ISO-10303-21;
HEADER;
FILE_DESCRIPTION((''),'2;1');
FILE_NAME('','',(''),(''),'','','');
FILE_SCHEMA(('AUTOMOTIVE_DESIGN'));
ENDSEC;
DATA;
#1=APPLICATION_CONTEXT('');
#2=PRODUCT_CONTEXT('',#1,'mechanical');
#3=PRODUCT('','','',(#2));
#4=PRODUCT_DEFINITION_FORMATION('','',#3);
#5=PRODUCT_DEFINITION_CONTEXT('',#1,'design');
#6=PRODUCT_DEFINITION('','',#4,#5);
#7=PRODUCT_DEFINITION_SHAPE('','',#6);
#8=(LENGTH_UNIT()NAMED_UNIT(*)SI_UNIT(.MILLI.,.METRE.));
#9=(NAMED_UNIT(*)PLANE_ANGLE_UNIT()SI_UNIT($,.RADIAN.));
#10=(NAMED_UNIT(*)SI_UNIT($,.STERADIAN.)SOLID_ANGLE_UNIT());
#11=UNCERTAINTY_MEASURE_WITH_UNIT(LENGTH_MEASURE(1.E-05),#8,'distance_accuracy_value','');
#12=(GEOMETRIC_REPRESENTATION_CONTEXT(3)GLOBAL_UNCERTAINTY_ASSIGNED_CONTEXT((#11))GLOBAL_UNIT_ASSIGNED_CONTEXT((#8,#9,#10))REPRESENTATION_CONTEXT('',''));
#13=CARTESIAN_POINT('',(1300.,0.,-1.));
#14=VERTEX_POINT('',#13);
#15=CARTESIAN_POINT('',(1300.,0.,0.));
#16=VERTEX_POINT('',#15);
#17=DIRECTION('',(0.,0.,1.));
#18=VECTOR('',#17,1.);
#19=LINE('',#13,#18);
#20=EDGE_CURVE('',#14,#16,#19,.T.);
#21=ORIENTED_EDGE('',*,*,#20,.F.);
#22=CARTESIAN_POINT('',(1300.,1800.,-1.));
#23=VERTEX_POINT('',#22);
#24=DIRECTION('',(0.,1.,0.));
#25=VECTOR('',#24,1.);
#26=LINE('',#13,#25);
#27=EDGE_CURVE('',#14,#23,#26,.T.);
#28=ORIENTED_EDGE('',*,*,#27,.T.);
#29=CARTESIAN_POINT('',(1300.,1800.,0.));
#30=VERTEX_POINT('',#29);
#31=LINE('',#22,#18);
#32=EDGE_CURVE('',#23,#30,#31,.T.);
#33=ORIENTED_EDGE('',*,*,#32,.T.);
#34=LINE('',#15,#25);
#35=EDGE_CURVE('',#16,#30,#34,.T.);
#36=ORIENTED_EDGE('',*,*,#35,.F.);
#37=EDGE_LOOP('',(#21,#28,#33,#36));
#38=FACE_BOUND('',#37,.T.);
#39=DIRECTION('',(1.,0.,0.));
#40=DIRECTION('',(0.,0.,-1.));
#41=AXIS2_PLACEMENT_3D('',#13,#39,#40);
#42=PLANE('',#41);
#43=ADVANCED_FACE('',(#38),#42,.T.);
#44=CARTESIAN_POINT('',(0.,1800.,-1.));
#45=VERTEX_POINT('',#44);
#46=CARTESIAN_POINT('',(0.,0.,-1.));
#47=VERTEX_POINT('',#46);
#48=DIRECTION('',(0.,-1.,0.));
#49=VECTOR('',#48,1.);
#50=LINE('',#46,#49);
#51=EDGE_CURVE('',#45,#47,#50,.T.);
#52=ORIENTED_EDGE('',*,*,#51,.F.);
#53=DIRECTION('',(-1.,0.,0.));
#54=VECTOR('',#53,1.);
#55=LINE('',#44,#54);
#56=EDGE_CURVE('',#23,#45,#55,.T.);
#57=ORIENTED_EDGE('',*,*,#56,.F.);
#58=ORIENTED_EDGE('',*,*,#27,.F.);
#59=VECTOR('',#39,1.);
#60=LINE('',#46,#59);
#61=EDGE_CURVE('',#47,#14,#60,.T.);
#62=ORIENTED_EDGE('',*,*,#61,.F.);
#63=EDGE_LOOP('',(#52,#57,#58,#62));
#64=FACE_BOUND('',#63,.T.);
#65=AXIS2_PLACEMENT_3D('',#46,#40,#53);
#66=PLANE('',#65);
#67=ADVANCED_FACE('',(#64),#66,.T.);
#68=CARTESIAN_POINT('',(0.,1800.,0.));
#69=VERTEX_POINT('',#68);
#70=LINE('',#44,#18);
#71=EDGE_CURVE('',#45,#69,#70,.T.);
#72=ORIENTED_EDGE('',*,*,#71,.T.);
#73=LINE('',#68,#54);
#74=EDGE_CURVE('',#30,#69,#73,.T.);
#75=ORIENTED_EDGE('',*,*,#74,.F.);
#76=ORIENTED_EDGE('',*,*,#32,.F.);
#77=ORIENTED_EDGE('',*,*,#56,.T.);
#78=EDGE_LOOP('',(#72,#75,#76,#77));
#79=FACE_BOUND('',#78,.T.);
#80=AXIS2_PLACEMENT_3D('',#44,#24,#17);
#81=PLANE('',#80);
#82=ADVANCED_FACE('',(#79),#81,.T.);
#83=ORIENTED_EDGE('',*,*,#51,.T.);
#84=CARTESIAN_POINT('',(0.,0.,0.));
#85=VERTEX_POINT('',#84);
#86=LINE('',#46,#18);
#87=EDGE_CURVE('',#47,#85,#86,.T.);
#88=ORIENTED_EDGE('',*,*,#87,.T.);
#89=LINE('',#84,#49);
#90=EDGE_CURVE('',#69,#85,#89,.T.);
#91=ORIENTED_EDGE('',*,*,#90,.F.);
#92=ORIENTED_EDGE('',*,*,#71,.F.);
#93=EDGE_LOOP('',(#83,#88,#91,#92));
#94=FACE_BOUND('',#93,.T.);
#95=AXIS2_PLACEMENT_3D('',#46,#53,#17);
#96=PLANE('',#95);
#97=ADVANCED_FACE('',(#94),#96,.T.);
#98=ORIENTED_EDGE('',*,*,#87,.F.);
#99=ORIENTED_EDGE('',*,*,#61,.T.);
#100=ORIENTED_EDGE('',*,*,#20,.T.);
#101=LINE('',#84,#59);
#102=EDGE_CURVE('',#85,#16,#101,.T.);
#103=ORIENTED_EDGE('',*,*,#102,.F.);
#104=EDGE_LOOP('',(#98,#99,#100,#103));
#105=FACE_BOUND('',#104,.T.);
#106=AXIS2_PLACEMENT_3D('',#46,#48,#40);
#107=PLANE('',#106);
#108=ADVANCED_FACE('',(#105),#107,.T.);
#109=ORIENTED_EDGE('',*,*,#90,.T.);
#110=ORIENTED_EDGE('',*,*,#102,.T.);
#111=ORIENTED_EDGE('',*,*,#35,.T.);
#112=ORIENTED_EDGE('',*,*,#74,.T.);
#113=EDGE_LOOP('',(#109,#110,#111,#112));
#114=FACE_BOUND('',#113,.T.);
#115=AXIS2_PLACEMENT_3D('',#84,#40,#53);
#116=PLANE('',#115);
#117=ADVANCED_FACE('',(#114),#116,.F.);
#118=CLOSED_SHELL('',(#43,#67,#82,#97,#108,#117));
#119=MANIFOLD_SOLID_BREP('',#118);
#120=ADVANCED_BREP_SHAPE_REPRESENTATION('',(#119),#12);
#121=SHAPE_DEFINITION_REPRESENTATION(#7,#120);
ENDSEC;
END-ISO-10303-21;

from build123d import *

# Parameters (mm, degrees)
SZKIC1_W               = 1300
SZKIC1_H               = 1800
ODGI_CIE_BAZOWE1_DEPTH = 1


# Sheet-metal steps are written as plain solids
with BuildPart() as part:
    # Szkic1 → Odgięcie bazowe1 (new body)
    with BuildSketch(Plane.XY):
        with Locations((650, 900)):
            Rectangle(SZKIC1_W, SZKIC1_H)
    extrude(amount=-ODGI_CIE_BAZOWE1_DEPTH)


solid = part.part
